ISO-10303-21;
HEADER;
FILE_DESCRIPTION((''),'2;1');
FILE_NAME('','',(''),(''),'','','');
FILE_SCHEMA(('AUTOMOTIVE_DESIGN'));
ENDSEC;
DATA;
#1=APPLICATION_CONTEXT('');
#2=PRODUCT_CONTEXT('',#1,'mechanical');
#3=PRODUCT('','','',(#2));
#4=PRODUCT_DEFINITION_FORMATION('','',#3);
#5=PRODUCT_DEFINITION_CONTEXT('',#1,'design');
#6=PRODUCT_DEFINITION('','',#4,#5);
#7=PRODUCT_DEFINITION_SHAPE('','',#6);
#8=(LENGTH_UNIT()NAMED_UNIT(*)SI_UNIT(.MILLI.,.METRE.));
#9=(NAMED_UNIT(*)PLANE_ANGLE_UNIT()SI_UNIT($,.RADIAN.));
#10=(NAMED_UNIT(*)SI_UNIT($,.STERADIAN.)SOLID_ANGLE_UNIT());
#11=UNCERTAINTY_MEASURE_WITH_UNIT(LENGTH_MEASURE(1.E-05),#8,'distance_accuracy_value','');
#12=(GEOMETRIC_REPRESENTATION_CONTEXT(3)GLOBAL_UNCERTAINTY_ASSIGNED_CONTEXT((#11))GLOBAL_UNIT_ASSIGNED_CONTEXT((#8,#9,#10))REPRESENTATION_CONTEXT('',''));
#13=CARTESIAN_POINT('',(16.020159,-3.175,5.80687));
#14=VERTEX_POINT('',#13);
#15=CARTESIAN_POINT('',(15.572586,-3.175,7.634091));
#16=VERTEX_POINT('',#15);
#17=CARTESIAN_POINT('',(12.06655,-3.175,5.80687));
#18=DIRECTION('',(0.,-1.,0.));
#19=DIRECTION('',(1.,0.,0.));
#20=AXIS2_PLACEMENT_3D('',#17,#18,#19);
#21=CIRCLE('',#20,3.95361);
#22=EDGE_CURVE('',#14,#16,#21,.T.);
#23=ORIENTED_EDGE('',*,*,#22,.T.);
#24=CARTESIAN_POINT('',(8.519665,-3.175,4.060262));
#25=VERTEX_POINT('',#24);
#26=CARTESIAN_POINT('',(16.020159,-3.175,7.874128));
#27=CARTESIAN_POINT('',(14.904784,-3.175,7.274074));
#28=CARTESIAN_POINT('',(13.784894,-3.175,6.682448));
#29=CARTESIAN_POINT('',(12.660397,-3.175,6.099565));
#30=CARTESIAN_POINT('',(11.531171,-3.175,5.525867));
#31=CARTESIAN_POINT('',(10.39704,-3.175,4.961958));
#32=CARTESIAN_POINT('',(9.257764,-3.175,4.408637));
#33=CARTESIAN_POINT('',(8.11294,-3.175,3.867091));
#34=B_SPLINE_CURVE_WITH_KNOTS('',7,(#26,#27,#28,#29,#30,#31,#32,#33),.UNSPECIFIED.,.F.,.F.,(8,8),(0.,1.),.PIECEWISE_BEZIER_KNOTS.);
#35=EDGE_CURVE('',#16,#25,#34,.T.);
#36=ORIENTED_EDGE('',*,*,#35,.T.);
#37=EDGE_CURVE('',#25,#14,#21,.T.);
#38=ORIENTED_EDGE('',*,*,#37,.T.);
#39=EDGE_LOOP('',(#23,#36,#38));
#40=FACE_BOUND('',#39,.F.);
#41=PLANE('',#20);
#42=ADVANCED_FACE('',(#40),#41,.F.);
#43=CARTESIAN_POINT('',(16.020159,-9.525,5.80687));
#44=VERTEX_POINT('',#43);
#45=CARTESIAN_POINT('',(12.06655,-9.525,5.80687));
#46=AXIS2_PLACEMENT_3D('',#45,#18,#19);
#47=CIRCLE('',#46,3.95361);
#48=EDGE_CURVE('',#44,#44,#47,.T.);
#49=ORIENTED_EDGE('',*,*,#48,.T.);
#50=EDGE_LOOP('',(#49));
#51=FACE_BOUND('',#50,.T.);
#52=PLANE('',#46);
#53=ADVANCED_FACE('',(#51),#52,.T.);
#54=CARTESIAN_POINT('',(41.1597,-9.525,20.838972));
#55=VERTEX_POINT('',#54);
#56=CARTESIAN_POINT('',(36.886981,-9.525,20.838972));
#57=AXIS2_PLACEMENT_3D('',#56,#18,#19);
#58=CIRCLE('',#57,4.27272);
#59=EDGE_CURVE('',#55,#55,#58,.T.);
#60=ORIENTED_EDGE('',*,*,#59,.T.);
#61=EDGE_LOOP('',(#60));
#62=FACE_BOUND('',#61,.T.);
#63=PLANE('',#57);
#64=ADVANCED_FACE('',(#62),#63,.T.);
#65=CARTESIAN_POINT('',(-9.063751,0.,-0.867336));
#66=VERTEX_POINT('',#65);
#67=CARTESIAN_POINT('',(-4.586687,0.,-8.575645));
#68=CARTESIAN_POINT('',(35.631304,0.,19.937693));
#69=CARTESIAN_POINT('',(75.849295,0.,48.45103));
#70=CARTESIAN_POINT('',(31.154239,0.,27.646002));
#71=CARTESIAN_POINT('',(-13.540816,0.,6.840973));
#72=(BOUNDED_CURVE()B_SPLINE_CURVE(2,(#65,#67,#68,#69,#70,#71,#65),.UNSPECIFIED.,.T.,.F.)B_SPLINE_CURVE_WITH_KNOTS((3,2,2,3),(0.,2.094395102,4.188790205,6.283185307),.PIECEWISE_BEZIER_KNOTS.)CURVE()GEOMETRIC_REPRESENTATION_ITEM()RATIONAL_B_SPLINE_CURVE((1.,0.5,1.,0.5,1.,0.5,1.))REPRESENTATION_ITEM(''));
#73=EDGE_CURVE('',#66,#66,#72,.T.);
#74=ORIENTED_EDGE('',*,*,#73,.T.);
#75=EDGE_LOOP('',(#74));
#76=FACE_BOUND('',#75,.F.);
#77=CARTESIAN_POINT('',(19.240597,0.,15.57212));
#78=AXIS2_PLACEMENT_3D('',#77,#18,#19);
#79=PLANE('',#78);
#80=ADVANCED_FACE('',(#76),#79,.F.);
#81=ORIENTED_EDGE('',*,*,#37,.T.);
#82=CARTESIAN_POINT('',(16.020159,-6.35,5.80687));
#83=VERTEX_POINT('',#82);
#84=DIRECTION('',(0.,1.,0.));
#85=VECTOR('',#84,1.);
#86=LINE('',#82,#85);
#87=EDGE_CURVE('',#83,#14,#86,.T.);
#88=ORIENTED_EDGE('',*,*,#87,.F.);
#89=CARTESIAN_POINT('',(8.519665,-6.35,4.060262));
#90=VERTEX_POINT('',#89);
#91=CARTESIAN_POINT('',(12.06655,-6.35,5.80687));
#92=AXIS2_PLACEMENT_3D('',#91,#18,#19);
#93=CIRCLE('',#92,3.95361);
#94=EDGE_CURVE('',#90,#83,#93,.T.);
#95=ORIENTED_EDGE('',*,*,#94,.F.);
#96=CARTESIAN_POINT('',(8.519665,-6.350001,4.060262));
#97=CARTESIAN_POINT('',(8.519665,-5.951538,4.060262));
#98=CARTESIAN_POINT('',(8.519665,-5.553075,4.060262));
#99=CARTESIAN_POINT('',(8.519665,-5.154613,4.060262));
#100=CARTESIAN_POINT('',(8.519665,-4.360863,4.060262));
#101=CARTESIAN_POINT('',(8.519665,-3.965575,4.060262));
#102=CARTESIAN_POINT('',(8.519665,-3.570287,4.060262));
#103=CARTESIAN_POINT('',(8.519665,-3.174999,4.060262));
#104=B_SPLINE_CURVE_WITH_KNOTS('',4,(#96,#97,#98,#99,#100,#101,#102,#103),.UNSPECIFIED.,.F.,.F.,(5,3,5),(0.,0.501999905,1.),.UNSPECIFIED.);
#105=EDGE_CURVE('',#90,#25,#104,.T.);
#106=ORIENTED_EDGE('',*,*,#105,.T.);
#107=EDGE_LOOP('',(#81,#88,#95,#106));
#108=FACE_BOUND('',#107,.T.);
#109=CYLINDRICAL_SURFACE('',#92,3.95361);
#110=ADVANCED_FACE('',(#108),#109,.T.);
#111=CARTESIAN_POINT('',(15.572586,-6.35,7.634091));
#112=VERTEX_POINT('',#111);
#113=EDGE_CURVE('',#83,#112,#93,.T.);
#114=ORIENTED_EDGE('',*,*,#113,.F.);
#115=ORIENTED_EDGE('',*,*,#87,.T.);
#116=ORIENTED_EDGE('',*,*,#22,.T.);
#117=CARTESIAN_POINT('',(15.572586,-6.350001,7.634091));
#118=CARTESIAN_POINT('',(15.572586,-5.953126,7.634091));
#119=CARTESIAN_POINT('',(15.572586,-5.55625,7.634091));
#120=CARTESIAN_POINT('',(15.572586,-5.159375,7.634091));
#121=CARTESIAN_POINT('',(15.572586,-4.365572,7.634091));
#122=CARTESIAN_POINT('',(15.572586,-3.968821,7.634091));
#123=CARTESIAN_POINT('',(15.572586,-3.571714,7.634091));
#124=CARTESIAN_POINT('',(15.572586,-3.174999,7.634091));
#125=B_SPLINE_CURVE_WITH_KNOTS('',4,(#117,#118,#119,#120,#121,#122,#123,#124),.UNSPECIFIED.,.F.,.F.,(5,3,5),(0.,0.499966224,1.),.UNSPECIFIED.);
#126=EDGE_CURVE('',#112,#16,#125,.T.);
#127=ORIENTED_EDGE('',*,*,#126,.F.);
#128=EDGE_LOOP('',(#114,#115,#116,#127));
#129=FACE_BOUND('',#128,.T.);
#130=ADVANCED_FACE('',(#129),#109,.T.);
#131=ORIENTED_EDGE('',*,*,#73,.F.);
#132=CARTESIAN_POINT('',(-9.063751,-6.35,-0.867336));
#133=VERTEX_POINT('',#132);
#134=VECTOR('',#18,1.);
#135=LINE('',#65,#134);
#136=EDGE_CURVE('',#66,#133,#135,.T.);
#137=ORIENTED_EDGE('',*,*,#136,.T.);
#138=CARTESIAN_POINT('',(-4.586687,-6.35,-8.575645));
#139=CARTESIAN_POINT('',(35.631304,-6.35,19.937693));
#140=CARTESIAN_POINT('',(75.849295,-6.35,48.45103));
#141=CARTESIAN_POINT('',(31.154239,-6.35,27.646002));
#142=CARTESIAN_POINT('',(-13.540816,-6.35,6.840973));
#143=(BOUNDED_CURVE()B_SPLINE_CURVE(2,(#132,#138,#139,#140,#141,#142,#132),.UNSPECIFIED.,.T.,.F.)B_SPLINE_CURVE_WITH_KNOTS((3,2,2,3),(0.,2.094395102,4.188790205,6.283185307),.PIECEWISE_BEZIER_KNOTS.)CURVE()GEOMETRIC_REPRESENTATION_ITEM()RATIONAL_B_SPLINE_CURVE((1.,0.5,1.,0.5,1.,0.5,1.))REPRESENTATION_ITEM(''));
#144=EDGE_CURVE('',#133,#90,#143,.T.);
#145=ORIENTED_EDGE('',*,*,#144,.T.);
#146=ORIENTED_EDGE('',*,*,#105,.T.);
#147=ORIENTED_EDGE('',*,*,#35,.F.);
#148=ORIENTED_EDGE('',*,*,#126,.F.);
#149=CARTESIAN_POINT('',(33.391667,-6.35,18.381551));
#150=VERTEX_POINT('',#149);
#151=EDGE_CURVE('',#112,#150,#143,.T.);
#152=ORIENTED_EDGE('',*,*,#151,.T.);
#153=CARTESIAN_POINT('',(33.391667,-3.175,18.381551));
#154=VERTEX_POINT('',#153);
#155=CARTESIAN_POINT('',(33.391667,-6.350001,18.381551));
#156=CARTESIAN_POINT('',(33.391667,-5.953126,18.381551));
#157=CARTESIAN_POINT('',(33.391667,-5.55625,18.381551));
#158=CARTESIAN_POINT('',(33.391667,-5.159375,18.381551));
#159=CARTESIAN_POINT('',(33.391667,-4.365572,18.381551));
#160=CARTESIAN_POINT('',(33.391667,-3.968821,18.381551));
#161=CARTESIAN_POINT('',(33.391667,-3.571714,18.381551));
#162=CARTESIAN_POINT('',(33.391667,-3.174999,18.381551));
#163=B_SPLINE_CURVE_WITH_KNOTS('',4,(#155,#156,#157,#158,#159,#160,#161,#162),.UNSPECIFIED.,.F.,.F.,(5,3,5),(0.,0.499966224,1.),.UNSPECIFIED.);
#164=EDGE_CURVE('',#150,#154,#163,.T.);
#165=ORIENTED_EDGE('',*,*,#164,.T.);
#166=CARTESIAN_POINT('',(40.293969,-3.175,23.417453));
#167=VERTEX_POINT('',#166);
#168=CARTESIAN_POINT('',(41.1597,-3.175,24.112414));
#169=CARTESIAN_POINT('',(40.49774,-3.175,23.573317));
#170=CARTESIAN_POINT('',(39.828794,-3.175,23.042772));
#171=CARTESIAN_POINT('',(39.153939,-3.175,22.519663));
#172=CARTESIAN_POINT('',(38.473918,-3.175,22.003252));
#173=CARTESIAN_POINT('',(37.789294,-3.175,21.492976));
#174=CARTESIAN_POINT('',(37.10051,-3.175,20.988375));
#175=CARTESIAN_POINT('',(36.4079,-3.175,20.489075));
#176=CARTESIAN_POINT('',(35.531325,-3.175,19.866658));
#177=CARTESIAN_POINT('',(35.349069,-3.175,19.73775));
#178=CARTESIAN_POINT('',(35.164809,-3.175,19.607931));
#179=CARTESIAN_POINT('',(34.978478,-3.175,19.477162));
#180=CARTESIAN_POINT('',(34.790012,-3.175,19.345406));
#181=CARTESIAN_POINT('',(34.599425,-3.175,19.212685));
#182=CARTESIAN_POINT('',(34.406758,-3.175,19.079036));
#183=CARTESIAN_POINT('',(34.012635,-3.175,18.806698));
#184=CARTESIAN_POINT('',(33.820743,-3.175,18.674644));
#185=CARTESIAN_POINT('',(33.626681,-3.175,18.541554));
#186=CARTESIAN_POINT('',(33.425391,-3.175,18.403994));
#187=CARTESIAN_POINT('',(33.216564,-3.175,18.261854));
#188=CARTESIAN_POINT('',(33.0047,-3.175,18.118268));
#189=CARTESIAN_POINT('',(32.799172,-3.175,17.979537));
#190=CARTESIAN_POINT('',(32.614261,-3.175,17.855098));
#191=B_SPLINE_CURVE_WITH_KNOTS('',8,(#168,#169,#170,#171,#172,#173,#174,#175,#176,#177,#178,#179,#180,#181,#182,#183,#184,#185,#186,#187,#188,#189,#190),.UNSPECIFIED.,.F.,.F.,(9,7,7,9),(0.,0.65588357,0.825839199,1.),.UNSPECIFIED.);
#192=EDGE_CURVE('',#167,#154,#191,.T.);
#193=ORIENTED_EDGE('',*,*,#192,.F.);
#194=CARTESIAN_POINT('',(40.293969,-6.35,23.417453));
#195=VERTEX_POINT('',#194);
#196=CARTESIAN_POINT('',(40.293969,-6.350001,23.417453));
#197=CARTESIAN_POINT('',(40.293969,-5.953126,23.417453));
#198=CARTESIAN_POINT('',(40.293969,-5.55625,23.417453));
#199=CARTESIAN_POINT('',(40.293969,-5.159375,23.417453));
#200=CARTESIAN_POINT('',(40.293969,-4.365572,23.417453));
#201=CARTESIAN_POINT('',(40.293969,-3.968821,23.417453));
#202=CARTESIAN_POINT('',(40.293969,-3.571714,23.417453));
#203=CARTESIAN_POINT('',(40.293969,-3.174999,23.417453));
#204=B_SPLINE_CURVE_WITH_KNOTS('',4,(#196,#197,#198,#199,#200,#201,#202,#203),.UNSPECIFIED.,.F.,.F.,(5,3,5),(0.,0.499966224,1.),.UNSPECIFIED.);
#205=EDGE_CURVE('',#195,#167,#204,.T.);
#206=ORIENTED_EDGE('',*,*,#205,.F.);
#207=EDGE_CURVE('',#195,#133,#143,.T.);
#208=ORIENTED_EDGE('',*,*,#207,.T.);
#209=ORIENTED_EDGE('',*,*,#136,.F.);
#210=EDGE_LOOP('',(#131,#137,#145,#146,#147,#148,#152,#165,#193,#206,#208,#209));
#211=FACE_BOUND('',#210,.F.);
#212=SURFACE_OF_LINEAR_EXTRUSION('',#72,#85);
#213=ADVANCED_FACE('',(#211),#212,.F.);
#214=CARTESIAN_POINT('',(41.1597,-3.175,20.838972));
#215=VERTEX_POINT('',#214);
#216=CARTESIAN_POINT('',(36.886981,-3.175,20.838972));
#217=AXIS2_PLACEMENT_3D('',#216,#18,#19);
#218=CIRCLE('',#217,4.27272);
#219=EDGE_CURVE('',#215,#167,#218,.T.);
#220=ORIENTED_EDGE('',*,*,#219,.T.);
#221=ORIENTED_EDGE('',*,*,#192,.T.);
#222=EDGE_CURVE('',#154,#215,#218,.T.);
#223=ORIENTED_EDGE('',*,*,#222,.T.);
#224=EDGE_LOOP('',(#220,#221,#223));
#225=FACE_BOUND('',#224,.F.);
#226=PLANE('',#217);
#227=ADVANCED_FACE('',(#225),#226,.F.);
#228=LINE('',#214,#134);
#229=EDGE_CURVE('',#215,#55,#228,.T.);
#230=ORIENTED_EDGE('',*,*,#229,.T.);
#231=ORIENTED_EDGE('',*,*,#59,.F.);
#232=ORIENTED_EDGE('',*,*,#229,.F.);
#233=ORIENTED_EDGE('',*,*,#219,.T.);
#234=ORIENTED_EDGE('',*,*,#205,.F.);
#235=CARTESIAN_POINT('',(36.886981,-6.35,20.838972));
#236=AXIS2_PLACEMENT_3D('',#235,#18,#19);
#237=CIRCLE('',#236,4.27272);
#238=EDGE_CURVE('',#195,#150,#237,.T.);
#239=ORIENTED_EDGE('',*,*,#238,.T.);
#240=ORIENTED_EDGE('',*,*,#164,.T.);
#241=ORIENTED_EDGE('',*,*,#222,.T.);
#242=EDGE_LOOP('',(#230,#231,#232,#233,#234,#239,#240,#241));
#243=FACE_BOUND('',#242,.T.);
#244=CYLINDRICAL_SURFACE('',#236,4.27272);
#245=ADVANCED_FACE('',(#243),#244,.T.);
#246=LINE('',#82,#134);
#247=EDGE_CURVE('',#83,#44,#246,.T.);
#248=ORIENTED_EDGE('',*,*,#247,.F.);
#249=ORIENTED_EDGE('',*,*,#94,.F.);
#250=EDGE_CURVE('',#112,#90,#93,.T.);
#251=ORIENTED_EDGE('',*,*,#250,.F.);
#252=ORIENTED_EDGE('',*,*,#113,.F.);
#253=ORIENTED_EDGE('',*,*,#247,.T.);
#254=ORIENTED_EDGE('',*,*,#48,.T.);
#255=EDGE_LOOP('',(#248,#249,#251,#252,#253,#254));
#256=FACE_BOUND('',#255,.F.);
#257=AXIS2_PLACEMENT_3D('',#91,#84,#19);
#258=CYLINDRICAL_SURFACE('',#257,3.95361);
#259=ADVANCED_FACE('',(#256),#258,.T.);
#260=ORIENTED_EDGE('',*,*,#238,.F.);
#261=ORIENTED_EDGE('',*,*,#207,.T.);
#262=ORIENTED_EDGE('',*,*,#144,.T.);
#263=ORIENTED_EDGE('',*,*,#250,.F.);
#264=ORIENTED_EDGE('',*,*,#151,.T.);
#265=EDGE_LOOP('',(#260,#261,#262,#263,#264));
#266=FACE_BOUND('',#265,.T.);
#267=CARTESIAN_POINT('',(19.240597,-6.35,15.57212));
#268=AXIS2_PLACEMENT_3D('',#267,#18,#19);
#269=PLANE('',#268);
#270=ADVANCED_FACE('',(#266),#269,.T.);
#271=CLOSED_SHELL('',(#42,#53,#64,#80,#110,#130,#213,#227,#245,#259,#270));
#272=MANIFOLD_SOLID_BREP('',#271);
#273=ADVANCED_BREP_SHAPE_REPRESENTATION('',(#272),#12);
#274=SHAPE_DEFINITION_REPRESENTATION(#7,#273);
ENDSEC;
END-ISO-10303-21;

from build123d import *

# Parameters (mm, degrees)
F2_DEPTH = 6.35
F4_R     = 3.9536095432
F4_R_2   = 4.2727196796
F5_DEPTH = 3.175


# Not quite as in the source:
# - the program builds the solid bodies; features that only make, move or delete a surface that nothing else refers to are left out


with BuildPart() as f2:
    # F0 (on Front) → F2 (new body)
    with BuildSketch(Plane.XZ):
        with BuildLine():
            add(Edge.make_bspline(
                [(-9.0637514368, -0.8673357661), (-4.5866868268, -8.5756445749), (35.6313039179, 19.9376927349), (75.8492946625, 48.4510300448), (31.1542393079, 27.6460015438), (-13.5408160468, 6.8409730428), (-9.0637514368, -0.8673357661)],
                knots=[0, 0, 0, 2.0943951024, 2.0943951024, 4.1887902048, 4.1887902048, 6.2831853072, 6.2831853072, 6.2831853072], degree=2, weights=[1, 0.5, 1, 0.5, 1, 0.5, 1]))
        make_face()
    extrude(amount=F2_DEPTH)

    # F4 (on face) → F5 (join, symmetric)
    with BuildSketch(Plane.XZ.offset(6.35)):
        with Locations((12.0665498317, 5.8068699208)):
            Circle(F4_R)
        with Locations((36.886980678, 20.8389717946)):
            Circle(F4_R_2)
    extrude(amount=F5_DEPTH, both=True)


solid = f2.part
